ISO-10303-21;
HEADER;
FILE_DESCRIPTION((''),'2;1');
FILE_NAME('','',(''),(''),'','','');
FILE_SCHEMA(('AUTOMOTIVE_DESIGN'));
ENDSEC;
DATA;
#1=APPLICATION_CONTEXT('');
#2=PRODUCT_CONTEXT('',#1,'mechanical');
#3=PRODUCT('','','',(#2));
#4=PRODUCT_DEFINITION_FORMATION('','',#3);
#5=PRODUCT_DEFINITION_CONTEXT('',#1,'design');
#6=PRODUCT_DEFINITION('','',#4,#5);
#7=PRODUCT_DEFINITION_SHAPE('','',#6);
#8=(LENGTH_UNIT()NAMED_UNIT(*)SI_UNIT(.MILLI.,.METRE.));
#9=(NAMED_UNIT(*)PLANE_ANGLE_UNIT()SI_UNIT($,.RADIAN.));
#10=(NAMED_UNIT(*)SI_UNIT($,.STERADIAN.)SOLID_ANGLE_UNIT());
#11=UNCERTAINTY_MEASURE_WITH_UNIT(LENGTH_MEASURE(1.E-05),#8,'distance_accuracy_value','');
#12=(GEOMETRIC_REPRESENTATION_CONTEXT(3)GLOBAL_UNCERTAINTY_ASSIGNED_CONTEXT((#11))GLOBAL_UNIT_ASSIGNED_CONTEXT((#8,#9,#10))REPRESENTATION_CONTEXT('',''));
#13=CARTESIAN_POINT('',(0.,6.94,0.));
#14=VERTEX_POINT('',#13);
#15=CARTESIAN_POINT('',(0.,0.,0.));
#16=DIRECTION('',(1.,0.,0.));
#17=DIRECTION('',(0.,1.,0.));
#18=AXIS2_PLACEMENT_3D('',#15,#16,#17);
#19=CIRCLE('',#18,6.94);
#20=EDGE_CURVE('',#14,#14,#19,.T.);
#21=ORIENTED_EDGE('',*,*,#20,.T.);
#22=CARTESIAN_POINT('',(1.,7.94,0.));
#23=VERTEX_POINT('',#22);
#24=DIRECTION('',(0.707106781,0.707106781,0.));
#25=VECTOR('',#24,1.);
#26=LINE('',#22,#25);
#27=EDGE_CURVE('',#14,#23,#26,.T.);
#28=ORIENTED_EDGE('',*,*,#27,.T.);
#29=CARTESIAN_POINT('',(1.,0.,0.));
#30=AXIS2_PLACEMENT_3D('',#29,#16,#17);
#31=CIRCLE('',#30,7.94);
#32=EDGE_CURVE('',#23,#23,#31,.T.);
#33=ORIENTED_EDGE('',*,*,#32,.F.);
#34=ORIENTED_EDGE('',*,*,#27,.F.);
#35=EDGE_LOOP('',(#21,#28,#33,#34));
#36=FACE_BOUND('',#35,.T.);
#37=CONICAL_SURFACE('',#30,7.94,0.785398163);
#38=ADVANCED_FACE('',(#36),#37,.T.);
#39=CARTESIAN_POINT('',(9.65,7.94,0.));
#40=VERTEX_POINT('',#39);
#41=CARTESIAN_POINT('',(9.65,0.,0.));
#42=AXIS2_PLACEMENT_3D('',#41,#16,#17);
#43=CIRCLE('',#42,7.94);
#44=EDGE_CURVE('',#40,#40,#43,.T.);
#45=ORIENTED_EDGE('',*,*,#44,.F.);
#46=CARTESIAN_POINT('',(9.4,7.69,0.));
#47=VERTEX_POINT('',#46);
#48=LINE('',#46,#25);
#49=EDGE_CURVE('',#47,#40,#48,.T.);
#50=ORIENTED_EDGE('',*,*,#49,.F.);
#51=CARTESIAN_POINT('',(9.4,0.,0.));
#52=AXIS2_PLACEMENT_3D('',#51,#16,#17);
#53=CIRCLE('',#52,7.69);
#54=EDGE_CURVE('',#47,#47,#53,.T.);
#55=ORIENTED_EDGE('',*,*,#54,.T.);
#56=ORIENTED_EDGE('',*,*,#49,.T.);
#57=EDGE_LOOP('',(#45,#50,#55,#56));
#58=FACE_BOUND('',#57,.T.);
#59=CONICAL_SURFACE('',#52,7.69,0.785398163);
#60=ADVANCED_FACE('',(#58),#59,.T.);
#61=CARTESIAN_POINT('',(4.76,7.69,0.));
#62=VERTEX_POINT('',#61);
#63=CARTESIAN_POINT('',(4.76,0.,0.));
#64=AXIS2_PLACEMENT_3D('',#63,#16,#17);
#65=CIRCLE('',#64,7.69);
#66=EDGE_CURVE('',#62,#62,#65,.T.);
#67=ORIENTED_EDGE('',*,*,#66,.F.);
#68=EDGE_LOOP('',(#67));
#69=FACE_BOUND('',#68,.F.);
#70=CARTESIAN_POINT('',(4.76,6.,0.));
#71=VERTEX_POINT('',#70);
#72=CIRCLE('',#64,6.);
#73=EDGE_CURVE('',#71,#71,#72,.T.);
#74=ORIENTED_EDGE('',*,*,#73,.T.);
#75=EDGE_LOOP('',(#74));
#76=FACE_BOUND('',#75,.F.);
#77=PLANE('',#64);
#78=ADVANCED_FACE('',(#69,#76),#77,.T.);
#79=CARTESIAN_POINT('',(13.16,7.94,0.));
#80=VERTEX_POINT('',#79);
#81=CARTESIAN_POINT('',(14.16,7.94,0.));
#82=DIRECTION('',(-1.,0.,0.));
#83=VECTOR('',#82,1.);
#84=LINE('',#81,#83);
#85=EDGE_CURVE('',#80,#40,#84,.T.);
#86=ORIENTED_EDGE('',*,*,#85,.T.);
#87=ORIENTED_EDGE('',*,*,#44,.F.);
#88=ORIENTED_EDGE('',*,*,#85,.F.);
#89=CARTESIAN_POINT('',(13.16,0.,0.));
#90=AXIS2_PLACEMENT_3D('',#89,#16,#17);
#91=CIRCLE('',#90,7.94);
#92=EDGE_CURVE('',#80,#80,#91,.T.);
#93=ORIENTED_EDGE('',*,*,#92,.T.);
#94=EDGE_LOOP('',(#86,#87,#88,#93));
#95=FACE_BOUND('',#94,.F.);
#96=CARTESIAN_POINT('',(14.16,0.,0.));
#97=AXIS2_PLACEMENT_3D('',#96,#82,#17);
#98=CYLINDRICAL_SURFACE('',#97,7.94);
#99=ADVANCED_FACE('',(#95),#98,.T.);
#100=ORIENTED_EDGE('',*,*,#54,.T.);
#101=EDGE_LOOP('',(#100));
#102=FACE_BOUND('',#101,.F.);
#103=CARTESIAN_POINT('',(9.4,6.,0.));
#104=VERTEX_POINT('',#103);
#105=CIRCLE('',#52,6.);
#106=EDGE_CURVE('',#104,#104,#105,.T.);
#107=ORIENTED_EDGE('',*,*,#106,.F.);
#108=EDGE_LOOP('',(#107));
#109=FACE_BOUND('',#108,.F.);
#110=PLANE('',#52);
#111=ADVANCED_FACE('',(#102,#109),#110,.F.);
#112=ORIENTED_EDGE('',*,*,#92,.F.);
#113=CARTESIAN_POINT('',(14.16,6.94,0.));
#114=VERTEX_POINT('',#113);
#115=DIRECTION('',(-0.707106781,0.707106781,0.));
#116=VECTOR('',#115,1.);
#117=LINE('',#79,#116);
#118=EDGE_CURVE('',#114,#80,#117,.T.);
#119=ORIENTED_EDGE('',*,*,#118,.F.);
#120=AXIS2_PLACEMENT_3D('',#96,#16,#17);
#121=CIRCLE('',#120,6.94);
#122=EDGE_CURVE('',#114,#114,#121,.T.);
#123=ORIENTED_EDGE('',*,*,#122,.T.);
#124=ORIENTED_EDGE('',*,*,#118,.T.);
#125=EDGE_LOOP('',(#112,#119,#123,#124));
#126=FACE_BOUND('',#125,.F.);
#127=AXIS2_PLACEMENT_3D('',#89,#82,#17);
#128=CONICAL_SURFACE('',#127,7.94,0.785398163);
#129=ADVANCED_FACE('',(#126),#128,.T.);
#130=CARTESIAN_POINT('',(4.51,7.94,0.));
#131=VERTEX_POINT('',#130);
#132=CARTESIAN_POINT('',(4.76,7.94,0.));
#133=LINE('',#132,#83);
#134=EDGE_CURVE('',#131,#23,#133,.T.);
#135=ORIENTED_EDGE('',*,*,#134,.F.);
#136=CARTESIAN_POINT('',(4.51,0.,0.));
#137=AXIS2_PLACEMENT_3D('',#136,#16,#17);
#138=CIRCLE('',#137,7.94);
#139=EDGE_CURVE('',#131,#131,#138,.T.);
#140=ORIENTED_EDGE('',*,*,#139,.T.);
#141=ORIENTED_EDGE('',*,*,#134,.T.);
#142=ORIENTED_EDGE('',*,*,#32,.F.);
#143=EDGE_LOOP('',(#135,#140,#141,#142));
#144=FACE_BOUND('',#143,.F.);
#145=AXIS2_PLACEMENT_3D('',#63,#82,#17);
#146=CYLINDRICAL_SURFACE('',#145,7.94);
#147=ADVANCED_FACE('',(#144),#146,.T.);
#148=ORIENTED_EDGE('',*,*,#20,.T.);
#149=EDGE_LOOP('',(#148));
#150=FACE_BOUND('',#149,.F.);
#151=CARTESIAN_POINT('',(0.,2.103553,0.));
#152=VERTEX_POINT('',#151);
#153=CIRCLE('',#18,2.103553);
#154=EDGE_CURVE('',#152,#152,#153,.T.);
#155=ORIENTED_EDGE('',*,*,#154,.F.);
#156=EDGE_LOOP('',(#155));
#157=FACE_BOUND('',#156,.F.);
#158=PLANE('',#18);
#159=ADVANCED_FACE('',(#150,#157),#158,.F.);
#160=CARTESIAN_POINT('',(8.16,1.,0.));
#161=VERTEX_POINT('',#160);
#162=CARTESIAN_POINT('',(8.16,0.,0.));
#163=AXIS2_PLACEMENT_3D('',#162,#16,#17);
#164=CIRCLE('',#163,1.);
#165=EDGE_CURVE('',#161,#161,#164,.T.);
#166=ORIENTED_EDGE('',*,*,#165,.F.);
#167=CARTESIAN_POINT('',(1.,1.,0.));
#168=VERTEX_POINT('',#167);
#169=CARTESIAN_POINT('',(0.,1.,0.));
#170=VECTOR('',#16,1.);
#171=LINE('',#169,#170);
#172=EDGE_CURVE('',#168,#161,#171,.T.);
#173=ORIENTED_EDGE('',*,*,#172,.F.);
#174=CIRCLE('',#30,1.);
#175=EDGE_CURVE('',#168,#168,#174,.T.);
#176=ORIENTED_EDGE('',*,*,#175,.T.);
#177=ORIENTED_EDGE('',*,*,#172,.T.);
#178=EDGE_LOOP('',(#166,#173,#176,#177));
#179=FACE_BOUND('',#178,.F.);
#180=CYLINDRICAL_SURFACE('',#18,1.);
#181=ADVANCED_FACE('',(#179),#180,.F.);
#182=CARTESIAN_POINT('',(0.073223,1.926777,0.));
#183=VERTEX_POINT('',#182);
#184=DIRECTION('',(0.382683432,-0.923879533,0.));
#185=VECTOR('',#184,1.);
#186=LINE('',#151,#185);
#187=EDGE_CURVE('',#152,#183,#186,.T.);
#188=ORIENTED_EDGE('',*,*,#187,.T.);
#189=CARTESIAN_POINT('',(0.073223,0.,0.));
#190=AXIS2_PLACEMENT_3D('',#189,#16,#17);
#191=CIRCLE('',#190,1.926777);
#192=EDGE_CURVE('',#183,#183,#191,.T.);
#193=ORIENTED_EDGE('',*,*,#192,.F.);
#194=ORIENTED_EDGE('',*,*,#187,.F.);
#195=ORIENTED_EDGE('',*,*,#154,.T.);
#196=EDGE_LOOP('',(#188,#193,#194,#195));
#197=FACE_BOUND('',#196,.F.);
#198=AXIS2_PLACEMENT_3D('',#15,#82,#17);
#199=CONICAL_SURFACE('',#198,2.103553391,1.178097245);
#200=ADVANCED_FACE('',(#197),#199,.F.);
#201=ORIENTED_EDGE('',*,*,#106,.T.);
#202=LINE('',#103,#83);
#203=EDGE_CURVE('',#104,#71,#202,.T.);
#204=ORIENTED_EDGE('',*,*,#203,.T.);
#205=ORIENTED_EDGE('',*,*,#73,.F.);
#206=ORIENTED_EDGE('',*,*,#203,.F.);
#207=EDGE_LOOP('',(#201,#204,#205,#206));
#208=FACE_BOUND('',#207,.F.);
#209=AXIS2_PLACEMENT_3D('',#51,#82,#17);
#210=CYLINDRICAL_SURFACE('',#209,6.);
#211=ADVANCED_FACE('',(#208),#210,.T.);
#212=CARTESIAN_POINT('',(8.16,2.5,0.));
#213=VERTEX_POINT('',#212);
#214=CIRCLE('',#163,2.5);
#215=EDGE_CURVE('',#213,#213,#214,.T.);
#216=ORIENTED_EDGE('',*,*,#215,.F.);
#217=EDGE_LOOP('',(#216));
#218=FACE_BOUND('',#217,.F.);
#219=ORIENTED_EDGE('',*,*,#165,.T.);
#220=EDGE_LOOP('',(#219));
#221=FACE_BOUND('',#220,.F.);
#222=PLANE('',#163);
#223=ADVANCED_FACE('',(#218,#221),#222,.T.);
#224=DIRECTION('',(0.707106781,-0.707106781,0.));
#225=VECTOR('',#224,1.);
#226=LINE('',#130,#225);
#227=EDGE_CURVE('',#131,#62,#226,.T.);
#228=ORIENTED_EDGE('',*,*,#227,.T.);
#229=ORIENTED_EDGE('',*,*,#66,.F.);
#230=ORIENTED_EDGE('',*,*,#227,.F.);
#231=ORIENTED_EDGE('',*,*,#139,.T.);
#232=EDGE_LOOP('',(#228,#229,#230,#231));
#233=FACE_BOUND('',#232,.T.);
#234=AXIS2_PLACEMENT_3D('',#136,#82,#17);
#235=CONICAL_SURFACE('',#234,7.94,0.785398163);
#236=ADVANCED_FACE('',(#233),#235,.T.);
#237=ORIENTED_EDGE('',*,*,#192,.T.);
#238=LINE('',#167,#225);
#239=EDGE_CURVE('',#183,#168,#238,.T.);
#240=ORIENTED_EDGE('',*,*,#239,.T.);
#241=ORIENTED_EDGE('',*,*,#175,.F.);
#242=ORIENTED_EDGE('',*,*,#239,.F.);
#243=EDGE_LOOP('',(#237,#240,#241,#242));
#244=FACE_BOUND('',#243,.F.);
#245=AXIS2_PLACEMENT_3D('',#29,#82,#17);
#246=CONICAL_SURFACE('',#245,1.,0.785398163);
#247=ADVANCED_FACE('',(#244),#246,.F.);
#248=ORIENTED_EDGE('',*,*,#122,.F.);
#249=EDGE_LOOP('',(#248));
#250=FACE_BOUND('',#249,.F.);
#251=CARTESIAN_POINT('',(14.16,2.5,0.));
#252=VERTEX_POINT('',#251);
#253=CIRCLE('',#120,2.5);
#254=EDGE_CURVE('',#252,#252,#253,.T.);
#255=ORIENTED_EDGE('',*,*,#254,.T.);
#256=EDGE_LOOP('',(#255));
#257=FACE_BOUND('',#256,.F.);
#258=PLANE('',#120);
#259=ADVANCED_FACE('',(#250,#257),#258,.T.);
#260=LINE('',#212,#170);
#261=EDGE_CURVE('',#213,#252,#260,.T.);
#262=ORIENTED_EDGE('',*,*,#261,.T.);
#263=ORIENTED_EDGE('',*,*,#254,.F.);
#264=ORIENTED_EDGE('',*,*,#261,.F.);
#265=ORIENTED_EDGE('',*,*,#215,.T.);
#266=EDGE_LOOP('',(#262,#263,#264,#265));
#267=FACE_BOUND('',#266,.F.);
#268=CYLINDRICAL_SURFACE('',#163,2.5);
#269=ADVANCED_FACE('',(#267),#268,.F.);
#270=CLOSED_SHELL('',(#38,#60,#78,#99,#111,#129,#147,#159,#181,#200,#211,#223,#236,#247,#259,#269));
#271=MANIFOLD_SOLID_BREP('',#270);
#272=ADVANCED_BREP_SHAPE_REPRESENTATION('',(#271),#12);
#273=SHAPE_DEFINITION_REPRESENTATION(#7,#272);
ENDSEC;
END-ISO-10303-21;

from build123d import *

# Parameters (mm, degrees)
F2_SIZE = 1


# Not quite as in the source:
# - a fillet or chamfer that OpenCascade refuses, or shapes differently, is made with other operations: its cross-section is extruded or revolved along the edge and cut away or added


with BuildPart() as f1:
    # F0 (on Top) → F1 (revolve)
    with BuildSketch(Plane.XY):
        Polygon((0, 7.94), (0, 1), (8.16, 1), (8.16, 2.5), (14.16, 2.5), (14.16, 7.94), (9.4, 7.94), (9.4, 6), (4.76, 6), (4.76, 7.94), align=None)
    revolve(axis=Axis((7.08, 0, 0), (1, 0, 0)))

    # F2
    f2_edges = [f1.edges().sort_by_distance(p)[0] for p in [
        (0, -7.94, 0),
        (14.16, -7.94, 0),
        (0, -1, 0),
    ]]
    chamfer(f2_edges, length=F2_SIZE)

    # F3: chamfer of 0.25 on 3 edges, made by hand

    # F3_s1 → F3_t2 (revolve, cut)
    with BuildSketch(Plane.XY):
        Polygon((4.51, 7.94), (4.76, 7.69), (4.76, 7.94), align=None)
    revolve(axis=Axis((4.76, 0, 0), (1, 0, 0)), mode=Mode.SUBTRACT)

    # F3_s3 → F3_t4 (revolve, cut)
    with BuildSketch(Plane.XY):
        Polygon((9.4, 7.69), (9.65, 7.94), (9.4, 7.94), align=None)
    revolve(axis=Axis((9.4, 0, 0), (1, 0, 0)), mode=Mode.SUBTRACT)

    # F3_s5 → F3_t6 (revolve, cut)
    with BuildSketch(Plane.XY):
        Polygon((0, 2.1035533906), (0.0732233047, 1.9267766953), (0, 2), align=None)
    revolve(axis=Axis((0, 0, 0), (1, 0, 0)), mode=Mode.SUBTRACT)


solid = f1.part
